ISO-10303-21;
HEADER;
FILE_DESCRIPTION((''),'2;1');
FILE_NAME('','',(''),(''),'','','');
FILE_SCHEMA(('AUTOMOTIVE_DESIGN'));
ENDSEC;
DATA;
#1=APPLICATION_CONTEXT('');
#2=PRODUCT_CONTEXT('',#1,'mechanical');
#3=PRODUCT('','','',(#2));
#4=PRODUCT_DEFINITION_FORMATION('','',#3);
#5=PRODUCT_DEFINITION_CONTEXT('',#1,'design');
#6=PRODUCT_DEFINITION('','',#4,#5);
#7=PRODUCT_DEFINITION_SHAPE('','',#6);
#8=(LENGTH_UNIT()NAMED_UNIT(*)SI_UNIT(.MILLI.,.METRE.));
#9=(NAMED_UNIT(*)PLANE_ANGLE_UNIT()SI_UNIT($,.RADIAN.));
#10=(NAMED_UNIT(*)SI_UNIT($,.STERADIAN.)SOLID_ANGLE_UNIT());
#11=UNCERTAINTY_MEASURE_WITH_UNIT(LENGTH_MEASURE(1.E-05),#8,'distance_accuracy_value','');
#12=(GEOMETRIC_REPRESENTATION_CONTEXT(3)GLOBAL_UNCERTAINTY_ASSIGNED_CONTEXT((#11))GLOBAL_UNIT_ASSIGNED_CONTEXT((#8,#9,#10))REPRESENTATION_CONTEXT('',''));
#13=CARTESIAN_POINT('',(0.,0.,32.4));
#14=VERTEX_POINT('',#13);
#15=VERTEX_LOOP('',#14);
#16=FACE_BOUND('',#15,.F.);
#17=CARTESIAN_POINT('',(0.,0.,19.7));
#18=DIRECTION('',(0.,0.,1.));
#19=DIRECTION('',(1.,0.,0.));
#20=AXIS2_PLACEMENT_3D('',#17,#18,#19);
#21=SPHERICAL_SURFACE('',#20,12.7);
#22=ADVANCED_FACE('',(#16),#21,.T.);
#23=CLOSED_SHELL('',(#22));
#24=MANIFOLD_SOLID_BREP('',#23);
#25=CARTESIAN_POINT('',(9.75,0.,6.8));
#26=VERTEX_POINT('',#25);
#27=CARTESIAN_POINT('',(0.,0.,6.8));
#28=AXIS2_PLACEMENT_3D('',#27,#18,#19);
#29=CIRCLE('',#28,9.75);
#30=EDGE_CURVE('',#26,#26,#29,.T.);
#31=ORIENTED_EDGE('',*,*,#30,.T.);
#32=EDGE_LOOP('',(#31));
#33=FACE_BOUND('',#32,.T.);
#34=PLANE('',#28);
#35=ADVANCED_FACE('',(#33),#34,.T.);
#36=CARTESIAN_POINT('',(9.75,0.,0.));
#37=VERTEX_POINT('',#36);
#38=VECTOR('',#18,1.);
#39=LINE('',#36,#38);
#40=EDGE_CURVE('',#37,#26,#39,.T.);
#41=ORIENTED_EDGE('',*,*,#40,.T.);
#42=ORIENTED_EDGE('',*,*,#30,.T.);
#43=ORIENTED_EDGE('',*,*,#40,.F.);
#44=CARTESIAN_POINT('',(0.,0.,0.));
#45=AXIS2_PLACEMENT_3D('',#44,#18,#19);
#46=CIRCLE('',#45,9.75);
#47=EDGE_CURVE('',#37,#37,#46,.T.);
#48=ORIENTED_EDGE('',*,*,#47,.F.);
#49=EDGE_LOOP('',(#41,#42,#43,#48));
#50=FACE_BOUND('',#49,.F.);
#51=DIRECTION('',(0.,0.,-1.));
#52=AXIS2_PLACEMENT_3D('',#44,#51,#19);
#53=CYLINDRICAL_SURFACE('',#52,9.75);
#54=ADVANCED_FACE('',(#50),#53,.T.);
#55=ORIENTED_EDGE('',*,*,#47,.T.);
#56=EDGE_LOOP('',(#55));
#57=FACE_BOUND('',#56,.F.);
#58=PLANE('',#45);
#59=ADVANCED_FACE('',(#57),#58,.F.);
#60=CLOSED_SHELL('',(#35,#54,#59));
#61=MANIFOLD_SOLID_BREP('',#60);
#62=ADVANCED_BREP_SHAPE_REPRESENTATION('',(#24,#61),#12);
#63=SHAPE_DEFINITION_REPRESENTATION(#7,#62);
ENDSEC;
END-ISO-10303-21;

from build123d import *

# Parameters (mm, degrees)
F3_R     = 9.75
F4_DEPTH = 6.8


# Not quite as in the source:
# - the program builds the solid bodies; features that only make, move or delete a surface that nothing else refers to are left out


with BuildPart() as f1:
    # F0 (on Front) → F1 (revolve)
    with BuildSketch(Plane.XZ):
        with BuildLine():
            Line((0, 32.4), (0, 7))
            ThreePointArc((0, 7), (12.7, 19.7), (0, 32.4))
        make_face()
    revolve(axis=Axis((0, 0, 19.7), (0, 0, -1)))


with BuildPart() as f4:
    # F3 (on Top) → F4 (new body)
    with BuildSketch(Plane.XY):
        Circle(F3_R)
    extrude(amount=F4_DEPTH)


solid = Compound([f1.part, f4.part])
